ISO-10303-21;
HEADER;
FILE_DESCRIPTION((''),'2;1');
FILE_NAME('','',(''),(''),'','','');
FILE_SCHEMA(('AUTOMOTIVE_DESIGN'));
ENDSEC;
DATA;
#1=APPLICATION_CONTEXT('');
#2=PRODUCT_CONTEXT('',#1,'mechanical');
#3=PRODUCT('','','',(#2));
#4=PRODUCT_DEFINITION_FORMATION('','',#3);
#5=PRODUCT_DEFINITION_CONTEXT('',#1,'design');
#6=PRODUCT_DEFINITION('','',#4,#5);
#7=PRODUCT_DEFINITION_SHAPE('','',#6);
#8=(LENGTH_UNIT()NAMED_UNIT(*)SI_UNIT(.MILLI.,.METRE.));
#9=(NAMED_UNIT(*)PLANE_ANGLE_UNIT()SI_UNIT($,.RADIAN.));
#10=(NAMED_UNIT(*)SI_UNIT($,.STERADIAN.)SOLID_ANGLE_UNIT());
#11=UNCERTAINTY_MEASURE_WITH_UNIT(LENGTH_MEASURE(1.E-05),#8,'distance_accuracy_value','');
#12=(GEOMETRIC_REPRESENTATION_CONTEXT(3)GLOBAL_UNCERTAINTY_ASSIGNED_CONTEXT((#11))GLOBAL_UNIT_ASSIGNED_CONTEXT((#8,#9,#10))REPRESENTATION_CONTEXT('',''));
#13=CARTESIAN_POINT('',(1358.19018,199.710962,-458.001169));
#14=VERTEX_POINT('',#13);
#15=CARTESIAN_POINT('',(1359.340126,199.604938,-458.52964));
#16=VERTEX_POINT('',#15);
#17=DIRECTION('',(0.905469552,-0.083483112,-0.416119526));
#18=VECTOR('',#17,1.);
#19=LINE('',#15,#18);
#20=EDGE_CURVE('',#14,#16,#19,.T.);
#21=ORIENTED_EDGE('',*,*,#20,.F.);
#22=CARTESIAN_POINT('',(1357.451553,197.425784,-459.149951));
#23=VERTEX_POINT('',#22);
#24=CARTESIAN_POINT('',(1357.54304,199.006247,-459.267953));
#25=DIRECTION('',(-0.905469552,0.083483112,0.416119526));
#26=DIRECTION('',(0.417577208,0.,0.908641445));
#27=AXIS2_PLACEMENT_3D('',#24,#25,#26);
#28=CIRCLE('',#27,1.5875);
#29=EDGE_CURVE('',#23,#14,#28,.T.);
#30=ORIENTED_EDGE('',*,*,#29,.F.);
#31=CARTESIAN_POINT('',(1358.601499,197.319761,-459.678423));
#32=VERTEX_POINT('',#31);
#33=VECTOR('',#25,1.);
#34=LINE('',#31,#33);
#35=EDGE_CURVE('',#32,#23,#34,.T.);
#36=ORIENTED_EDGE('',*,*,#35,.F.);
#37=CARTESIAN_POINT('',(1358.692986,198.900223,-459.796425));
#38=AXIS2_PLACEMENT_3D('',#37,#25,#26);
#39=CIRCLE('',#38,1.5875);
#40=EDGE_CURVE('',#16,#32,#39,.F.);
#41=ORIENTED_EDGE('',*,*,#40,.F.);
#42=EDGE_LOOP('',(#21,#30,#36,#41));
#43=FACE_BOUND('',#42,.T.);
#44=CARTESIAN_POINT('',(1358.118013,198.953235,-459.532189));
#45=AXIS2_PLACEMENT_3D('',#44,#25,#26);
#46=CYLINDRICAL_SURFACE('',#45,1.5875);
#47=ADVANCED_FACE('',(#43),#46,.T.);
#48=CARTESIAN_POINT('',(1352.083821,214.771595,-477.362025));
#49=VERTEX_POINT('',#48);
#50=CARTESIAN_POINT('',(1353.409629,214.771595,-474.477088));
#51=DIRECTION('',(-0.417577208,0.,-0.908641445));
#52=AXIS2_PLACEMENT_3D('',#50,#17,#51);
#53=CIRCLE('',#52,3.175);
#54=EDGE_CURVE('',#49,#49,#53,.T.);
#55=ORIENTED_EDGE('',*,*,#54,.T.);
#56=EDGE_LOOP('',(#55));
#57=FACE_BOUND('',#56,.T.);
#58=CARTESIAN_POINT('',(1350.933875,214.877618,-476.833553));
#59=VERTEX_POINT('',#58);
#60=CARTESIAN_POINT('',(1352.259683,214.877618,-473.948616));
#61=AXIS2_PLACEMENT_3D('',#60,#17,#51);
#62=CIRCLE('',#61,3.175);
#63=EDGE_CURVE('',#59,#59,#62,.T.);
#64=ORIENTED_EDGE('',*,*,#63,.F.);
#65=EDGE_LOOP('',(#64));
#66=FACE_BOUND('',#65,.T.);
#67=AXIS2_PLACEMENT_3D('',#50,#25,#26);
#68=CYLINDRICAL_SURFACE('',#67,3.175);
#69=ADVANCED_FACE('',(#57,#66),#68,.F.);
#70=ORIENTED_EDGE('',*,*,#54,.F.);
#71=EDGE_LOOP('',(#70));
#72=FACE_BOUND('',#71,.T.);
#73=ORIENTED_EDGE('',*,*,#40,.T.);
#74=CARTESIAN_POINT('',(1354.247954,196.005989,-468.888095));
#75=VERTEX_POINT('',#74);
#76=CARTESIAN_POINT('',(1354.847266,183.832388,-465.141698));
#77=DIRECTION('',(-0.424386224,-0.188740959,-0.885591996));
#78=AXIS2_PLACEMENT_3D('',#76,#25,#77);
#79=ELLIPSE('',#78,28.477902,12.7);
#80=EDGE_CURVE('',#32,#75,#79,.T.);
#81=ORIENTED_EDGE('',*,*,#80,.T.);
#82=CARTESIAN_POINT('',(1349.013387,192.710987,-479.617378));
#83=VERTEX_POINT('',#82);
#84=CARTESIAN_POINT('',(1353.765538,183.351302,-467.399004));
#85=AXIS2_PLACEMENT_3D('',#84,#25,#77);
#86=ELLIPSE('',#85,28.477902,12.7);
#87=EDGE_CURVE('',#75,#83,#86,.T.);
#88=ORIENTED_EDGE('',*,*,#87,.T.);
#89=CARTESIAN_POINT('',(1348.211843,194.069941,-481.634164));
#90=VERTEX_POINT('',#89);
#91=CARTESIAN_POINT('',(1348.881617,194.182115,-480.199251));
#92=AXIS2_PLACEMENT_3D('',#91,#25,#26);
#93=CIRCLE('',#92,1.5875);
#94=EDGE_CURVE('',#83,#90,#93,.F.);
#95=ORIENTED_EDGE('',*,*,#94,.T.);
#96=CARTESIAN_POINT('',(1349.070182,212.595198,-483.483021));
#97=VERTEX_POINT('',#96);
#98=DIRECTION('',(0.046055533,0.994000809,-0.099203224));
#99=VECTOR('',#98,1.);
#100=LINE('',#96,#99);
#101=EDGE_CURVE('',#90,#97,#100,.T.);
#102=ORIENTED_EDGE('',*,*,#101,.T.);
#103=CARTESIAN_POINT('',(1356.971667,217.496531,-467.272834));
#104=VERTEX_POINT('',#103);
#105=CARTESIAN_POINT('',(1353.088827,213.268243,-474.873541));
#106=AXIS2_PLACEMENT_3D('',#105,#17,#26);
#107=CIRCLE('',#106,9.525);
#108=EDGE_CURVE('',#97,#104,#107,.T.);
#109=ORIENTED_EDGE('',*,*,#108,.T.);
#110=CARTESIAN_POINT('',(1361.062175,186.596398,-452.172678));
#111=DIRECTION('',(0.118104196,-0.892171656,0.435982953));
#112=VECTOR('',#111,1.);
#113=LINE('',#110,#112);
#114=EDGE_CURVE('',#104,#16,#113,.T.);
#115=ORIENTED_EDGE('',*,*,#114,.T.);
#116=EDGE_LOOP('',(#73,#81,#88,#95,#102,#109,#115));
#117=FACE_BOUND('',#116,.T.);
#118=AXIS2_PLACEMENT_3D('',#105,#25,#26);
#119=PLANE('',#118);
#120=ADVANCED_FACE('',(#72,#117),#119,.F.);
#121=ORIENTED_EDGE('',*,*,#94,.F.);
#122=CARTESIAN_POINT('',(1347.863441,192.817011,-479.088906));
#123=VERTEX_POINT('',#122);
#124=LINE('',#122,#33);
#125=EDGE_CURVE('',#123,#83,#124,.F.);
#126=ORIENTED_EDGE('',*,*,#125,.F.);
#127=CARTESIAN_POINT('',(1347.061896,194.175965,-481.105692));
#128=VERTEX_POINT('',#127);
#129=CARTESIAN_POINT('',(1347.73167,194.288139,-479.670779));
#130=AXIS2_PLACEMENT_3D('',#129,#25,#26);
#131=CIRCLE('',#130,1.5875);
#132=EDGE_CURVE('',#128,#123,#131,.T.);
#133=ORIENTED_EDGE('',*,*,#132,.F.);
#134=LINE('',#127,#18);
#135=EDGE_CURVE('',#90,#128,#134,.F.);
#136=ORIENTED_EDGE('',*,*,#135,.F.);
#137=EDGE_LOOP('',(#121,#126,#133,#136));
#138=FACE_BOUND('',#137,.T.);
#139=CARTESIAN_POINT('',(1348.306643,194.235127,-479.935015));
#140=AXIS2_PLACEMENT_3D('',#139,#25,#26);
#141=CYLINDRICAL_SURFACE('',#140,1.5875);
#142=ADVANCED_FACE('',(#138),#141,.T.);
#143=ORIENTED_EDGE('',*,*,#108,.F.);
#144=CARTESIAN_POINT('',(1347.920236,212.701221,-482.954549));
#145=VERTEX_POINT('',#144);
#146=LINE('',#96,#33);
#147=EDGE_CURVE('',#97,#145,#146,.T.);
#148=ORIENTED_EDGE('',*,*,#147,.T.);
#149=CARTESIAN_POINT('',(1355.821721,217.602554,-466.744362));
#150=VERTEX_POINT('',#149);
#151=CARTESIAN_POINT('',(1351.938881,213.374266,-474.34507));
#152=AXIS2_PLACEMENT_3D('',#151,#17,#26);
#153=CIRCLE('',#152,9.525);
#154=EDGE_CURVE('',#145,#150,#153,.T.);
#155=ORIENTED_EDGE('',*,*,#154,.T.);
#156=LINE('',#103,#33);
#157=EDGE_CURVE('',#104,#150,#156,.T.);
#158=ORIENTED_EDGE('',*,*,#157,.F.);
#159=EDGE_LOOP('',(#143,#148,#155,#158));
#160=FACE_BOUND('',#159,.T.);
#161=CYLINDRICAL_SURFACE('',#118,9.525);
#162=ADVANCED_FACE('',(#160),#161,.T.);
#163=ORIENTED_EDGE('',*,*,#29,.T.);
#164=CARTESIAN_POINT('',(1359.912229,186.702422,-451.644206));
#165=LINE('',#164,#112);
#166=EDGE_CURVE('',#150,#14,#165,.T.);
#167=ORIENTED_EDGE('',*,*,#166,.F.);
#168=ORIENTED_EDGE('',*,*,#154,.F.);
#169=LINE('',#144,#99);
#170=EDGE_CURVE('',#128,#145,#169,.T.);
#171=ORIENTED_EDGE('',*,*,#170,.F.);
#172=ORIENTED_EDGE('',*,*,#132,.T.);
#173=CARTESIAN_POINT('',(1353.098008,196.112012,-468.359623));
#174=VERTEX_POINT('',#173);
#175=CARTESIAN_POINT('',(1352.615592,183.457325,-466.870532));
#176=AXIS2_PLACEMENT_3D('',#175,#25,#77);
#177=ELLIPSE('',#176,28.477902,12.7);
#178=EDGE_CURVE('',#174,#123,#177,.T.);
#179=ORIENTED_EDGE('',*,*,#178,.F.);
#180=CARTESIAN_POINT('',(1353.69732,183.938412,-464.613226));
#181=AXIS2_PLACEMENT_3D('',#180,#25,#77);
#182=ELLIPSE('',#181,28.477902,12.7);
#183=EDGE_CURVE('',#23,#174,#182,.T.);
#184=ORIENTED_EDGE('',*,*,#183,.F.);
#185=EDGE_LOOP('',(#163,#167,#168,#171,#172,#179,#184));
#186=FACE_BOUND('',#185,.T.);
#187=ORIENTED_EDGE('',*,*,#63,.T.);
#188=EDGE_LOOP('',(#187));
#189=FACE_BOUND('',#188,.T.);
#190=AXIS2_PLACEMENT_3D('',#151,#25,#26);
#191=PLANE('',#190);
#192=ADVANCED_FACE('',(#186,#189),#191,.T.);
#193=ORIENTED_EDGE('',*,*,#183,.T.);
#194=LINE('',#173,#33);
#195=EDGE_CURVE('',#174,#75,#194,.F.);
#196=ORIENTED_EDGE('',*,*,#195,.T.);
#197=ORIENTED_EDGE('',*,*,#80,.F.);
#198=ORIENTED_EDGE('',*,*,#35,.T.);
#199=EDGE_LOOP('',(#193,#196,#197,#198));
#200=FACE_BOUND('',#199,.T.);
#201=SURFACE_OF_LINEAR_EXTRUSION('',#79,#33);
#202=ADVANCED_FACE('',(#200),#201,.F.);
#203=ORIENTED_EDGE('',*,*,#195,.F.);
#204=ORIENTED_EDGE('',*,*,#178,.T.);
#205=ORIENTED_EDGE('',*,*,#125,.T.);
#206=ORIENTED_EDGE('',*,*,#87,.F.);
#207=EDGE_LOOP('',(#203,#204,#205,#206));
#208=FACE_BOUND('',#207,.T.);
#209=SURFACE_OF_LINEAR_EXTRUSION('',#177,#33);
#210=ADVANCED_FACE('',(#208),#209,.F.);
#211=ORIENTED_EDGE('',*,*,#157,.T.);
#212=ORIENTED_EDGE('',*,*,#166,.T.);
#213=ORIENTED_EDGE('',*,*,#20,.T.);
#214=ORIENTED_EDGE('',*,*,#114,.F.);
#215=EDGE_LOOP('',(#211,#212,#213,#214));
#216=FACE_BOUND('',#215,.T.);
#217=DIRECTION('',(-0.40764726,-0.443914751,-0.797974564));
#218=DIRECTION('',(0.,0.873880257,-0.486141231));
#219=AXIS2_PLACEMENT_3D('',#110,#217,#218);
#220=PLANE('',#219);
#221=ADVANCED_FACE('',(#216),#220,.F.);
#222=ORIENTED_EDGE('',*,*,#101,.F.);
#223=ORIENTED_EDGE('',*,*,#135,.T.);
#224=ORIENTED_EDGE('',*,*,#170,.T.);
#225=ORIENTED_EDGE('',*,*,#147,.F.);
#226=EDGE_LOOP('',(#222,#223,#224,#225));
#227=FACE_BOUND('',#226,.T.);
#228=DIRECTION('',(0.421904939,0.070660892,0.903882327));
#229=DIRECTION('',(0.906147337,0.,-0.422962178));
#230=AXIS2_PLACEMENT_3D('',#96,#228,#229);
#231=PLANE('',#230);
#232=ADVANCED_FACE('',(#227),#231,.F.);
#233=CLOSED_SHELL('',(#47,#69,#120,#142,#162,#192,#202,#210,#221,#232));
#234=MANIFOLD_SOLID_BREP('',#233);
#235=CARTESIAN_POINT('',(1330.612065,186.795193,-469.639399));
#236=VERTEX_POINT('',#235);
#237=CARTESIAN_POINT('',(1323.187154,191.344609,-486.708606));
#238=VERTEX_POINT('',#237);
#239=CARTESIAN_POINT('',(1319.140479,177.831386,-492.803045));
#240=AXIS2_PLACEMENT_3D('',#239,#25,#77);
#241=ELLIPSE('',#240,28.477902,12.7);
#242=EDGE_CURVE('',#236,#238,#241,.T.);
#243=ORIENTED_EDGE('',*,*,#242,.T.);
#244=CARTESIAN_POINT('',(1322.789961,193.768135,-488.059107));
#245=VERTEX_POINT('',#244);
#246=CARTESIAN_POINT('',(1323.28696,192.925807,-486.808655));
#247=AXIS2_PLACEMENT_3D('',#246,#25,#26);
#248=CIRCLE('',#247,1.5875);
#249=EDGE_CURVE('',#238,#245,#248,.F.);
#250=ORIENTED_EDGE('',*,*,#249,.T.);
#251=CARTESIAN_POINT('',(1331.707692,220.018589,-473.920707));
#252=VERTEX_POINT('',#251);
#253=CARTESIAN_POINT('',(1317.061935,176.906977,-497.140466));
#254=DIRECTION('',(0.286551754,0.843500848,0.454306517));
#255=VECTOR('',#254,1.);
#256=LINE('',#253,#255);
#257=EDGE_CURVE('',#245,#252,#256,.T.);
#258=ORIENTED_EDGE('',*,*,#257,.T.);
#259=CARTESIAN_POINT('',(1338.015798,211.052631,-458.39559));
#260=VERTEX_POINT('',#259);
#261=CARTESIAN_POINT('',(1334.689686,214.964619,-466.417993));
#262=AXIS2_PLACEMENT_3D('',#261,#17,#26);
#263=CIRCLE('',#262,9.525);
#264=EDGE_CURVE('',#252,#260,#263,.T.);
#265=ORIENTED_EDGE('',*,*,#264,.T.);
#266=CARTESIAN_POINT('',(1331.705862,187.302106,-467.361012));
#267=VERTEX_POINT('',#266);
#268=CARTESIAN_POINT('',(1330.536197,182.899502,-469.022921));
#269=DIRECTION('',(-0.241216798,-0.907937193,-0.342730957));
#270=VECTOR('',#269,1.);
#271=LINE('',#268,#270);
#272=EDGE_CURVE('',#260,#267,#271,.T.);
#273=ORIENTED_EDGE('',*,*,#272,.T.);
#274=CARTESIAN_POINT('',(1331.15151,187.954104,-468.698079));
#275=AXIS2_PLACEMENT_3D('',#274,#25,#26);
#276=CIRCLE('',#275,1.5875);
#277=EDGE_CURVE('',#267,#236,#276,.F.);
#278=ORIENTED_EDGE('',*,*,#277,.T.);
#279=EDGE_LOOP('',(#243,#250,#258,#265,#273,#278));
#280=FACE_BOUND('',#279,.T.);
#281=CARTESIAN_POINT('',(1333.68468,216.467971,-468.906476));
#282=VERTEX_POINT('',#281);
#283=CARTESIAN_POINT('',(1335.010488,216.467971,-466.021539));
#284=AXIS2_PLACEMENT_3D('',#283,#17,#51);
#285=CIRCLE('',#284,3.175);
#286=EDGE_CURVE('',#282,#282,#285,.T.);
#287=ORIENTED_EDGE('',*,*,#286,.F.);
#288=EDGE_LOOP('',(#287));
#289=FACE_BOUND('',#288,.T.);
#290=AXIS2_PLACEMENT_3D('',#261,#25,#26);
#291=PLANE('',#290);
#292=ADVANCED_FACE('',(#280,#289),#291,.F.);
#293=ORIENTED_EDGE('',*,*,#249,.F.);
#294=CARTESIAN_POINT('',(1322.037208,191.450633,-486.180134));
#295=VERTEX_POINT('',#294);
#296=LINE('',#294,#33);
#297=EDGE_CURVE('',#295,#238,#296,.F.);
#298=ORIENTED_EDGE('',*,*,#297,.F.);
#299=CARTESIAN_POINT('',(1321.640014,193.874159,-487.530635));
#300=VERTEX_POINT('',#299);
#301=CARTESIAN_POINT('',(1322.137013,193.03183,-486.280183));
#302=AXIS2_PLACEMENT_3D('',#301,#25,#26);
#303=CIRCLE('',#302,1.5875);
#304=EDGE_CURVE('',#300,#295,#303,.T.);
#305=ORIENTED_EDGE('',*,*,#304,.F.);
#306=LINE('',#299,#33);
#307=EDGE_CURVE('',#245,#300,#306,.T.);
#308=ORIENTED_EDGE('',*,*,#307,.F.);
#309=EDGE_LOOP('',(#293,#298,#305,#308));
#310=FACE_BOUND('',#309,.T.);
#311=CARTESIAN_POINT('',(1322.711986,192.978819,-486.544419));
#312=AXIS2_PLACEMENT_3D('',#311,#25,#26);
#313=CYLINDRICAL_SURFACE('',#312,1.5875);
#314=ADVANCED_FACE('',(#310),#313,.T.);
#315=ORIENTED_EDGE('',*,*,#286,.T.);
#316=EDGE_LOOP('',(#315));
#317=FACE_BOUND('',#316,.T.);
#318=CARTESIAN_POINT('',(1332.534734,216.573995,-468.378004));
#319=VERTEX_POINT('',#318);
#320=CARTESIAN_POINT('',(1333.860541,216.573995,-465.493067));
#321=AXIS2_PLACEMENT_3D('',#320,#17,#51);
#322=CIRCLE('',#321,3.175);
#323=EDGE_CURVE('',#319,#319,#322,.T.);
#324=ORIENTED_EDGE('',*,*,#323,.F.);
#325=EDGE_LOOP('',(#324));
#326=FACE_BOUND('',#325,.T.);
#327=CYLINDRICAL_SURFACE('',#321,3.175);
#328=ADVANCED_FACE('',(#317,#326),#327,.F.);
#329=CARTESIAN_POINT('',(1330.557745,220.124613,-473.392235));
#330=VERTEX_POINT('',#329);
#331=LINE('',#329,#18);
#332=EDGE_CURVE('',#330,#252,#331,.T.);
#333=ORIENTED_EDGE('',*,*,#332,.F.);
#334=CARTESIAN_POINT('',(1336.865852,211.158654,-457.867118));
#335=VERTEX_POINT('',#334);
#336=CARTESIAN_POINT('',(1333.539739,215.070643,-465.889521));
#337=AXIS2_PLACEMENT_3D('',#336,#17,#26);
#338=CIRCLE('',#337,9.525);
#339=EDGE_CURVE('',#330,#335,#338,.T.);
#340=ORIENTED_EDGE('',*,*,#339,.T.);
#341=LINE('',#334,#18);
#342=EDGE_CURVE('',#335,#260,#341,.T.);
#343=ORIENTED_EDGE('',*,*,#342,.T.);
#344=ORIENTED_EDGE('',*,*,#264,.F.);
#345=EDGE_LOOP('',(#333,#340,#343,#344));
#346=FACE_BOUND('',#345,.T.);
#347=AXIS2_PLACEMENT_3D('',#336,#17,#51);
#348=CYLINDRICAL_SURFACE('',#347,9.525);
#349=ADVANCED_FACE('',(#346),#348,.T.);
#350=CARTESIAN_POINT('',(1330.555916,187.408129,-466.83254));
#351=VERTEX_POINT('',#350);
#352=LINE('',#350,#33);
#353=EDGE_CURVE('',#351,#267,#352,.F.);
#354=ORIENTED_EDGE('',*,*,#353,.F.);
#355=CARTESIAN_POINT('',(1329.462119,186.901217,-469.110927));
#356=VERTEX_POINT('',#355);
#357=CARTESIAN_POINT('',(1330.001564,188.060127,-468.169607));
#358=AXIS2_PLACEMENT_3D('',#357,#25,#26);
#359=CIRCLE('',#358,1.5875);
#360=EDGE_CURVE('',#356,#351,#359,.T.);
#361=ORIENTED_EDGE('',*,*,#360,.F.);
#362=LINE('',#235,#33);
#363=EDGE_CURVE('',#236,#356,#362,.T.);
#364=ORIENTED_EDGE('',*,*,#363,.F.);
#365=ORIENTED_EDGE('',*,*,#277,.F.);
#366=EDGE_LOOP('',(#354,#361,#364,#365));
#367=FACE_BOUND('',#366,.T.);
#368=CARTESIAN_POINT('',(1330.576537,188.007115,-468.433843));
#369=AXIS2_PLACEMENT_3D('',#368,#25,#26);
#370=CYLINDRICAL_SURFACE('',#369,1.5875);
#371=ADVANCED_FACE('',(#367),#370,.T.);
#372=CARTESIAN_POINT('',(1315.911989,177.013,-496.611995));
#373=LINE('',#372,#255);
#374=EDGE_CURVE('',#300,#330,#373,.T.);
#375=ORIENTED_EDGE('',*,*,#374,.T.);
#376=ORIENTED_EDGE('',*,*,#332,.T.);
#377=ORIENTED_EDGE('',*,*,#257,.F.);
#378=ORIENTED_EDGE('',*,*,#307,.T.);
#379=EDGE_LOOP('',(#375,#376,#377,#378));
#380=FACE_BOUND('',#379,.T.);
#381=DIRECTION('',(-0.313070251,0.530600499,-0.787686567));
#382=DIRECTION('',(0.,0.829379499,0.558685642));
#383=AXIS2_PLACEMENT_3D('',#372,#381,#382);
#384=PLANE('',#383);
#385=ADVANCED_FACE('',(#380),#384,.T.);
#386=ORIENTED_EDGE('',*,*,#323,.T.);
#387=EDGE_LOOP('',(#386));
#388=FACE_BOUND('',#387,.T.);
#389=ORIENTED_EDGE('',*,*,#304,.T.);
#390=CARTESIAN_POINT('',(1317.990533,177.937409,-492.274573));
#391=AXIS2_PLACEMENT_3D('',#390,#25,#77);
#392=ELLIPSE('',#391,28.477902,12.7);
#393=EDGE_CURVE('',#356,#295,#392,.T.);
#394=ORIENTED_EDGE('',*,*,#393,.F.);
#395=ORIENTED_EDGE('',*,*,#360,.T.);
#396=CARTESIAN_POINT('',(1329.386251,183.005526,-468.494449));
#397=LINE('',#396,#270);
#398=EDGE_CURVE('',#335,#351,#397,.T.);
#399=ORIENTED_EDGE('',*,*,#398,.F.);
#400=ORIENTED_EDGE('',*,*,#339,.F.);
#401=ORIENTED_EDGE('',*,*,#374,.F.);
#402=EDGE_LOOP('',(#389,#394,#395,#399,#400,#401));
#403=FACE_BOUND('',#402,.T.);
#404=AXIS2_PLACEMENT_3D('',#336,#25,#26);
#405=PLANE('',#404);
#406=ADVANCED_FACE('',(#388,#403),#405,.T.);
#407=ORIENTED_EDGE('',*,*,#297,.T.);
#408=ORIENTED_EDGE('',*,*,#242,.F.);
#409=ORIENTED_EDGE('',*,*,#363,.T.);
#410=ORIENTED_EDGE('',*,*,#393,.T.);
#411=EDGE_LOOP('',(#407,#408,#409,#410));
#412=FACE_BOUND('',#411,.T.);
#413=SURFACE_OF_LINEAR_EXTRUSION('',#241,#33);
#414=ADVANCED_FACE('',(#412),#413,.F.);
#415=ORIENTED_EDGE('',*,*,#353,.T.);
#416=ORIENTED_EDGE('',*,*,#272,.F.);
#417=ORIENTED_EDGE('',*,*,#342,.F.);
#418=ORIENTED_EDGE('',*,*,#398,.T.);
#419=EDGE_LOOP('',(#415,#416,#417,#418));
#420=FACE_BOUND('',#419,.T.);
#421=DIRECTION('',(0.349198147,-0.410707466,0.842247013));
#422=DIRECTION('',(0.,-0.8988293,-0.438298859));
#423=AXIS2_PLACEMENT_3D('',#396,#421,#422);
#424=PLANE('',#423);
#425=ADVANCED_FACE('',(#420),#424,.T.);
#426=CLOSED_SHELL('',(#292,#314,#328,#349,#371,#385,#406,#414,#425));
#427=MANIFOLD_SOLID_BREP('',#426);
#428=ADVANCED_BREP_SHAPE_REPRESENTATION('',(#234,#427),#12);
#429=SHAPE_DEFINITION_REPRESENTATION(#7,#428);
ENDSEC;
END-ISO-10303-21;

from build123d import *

# Parameters (mm, degrees)
SKETCH2_R            = 3.175
BASE_FLANGE1_DEPTH   = 1.27
BASE_FLANGE2_START   = -1.27
SKETCH3_R            = 3.175
BASE_FLANGE2_DEPTH   = 1.27
CUT_EXTRUDE1_START   = 1383.390590681
CUT_EXTRUDE1_DEPTH   = 21.59
CUT_EXTRUDE1_START_2 = 1403.710590681
CUT_EXTRUDE1_2_DEPTH = 1.27
FILLET1_R            = 1.5875
FILLET2_R            = 1.5875


# Read off the part's stored shape, not the designer's step: Cut-Extrude1
# Sheet-metal steps are written as plain solids
with BuildPart() as part:
    # Sketch2 → Base-Flange1 (new body)
    with BuildSketch(Plane(origin=(1271.017200109, -117.186128876, -584.111385454), x_dir=(-0.41343144837747287, 0.048074727094114526, -0.9092652297912482), z_dir=(0.9054695523042622, -0.08348311229805495, -0.4161195258708122))):
        with BuildLine():
            Line((-111.741539823, 304.685096578), (-142.590441512, 312.195606854))
            Line((-142.590441512, 312.195606854), (-125.683734865, 342.423547719))
            ThreePointArc((-125.683734865, 342.423547719), (-114.423324415, 346.831514257), (-107.913283545, 336.641009835))
            Line((-107.913283545, 336.641009835), (-111.741539823, 304.685096578))
        make_face()
        with Locations(Location((-117.791498951, 339.304688334, 0), (0, 0, 357.234798667))):
            Circle(SKETCH2_R, mode=Mode.SUBTRACT)
    extrude(amount=BASE_FLANGE1_DEPTH)


with BuildPart() as body_2:
    # Sketch3 → Base-Flange2 (new body)
    with BuildSketch(Plane(origin=(1253.768005138, -115.595775587, -576.184308486), x_dir=(-0.41343144837747287, 0.048074727094114526, -0.9092652297912482), z_dir=(0.9054695523042622, -0.08348311229805495, -0.4161195258708122)).offset(BASE_FLANGE2_START)):
        with BuildLine():
            Line((-114.826429992, 305.436147605), (-83.977528304, 297.925637329))
            Line((-83.977528304, 297.925637329), (-109.072885328, 342.450794137))
            ThreePointArc((-109.072885328, 342.450794137), (-121.469860523, 346.371786734), (-126.228340332, 334.271536867))
            Line((-126.228340332, 334.271536867), (-114.826429992, 305.436147605))
        make_face()
        with Locations(Location((-117.791498951, 339.304688334, 0), (0, 0, 357.234798667))):
            Circle(SKETCH3_R, mode=Mode.SUBTRACT)
    extrude(amount=BASE_FLANGE2_DEPTH)


with BuildPart() as cut_extrude1_tool:
    # Cut-Extrude1 outline → Cut-Extrude1 (new body)
    with BuildSketch(Plane(origin=(0, 0, 0), x_dir=(0.07585621579403598, 0.996509192110655, -0.034860644922007814), z_dir=(0.9054695523042622, -0.08348311229805501, -0.4161195258708122)).offset(CUT_EXTRUDE1_START)):
        with BuildLine():
            Line((301.620270259, 130.368525756), (313.659534542, 135.814514494))
            add(Edge.make_bspline(
                [(314.39563609, 139.451923084), (314.080178625, 137.620550007), (313.659534542, 135.814514494)],
                knots=[4.667621379, 4.667621379, 4.667621379, 4.798627184, 4.798627184, 4.798627184], degree=2, weights=[1, 0.991421278, 0.987108427]))
            add(Edge.make_bspline(
                [(315.765923985, 152.105599478), (315.778536243, 145.923297426), (314.39563609, 139.451923084)],
                knots=[4.300161202, 4.300161202, 4.300161202, 4.757156582, 4.757156582, 4.757156582], degree=2, weights=[1, 0.974007789, 1]))
            Line((315.765923985, 152.105599478), (304.953083323, 157.485707038))
            Line((304.953083323, 157.485707038), (299.540917585, 129.427925817))
            Line((299.540917585, 129.427925817), (293.527400097, 98.25261335))
            Line((293.527400097, 98.25261335), (307.840240712, 107.256042799))
            add(Edge.make_bspline(
                [(307.840240712, 107.256042799), (308.18810541, 111.397419869), (308.183888711, 115.675478714), (307.714650854, 119.739298085), (306.758436434, 123.198741783), (304.833094177, 127.168835045), (304.108187458, 128.292843046), (303.317163588, 129.197719216), (302.481286055, 129.885010912), (301.620270259, 130.368525756)],
                knots=[3.684656994, 3.684656994, 3.684656994, 3.684656994, 3.684656994, 3.684656994, 4.476569223, 4.476569223, 4.476569223, 4.476569223, 4.872364489, 4.872364489, 4.872364489, 4.872364489, 4.872364489, 4.872364489], degree=5, weights=[1, 1, 0.997972732, 0.997583217, 1, 1, 0.999902079, 0.999924912, 1, 1]))
        make_face()
    extrude(amount=CUT_EXTRUDE1_DEPTH)


with BuildPart() as part_1:
    add(part.part)

    # Cut-Extrude1: cut by cut_extrude1_tool
    add(cut_extrude1_tool.part, mode=Mode.SUBTRACT)

    # Cut-Extrude1 2 outline → Cut-Extrude1 2 (cut)
    with BuildSketch(Plane(origin=(0, 0, 0), x_dir=(0.07585621579403598, 0.996509192110655, -0.034860644922007814), z_dir=(0.9054695523042622, -0.08348311229805501, -0.4161195258708122)).offset(CUT_EXTRUDE1_START_2)):
        with BuildLine():
            Line((313.659534542, 135.814514494), (301.620270259, 130.368525756))
            add(Edge.make_bspline(
                [(301.620270259, 130.368525756), (303.903052509, 129.086599093), (305.474701099, 125.845829066)],
                knots=[3.288861728, 3.288861728, 3.288861728, 3.684656994, 3.684656994, 3.684656994], degree=2, weights=[1, 0.942945604, 0.92391717]))
            Line((305.474701099, 125.845829066), (310.2442301, 125.506775846))
            add(Edge.make_bspline(
                [(313.659534542, 135.814514494), (312.365699462, 130.259433149), (310.2442301, 125.506775846)],
                knots=[4.798627184, 4.798627184, 4.798627184, 5.194530174, 5.194530174, 5.194530174], degree=2, weights=[0.987108427, 0.974074877, 1]))
        make_face()
    extrude(amount=CUT_EXTRUDE1_2_DEPTH, mode=Mode.SUBTRACT)

    # Fillet1
    fillet1_edges = [part_1.edges().sort_by_distance(p)[0] for p in [
        (1359.060812848, 197.424505154, -457.173973401),
        (1347.534895545, 191.922086442, -481.150277132),
    ]]
    fillet(fillet1_edges, radius=FILLET1_R)


with BuildPart() as body_2_1:
    add(body_2.part)

    # Cut-Extrude1: cut by cut_extrude1_tool
    add(cut_extrude1_tool.part, mode=Mode.SUBTRACT)

    # Fillet2
    fillet2_edges = [body_2_1.edges().sort_by_distance(p)[0] for p in [
        (1321.33230656, 191.222865761, -489.194296195),
        (1330.511729235, 185.02460803, -467.976504101),
    ]]
    fillet(fillet2_edges, radius=FILLET2_R)


solid = Compound([part_1.part, body_2_1.part])
